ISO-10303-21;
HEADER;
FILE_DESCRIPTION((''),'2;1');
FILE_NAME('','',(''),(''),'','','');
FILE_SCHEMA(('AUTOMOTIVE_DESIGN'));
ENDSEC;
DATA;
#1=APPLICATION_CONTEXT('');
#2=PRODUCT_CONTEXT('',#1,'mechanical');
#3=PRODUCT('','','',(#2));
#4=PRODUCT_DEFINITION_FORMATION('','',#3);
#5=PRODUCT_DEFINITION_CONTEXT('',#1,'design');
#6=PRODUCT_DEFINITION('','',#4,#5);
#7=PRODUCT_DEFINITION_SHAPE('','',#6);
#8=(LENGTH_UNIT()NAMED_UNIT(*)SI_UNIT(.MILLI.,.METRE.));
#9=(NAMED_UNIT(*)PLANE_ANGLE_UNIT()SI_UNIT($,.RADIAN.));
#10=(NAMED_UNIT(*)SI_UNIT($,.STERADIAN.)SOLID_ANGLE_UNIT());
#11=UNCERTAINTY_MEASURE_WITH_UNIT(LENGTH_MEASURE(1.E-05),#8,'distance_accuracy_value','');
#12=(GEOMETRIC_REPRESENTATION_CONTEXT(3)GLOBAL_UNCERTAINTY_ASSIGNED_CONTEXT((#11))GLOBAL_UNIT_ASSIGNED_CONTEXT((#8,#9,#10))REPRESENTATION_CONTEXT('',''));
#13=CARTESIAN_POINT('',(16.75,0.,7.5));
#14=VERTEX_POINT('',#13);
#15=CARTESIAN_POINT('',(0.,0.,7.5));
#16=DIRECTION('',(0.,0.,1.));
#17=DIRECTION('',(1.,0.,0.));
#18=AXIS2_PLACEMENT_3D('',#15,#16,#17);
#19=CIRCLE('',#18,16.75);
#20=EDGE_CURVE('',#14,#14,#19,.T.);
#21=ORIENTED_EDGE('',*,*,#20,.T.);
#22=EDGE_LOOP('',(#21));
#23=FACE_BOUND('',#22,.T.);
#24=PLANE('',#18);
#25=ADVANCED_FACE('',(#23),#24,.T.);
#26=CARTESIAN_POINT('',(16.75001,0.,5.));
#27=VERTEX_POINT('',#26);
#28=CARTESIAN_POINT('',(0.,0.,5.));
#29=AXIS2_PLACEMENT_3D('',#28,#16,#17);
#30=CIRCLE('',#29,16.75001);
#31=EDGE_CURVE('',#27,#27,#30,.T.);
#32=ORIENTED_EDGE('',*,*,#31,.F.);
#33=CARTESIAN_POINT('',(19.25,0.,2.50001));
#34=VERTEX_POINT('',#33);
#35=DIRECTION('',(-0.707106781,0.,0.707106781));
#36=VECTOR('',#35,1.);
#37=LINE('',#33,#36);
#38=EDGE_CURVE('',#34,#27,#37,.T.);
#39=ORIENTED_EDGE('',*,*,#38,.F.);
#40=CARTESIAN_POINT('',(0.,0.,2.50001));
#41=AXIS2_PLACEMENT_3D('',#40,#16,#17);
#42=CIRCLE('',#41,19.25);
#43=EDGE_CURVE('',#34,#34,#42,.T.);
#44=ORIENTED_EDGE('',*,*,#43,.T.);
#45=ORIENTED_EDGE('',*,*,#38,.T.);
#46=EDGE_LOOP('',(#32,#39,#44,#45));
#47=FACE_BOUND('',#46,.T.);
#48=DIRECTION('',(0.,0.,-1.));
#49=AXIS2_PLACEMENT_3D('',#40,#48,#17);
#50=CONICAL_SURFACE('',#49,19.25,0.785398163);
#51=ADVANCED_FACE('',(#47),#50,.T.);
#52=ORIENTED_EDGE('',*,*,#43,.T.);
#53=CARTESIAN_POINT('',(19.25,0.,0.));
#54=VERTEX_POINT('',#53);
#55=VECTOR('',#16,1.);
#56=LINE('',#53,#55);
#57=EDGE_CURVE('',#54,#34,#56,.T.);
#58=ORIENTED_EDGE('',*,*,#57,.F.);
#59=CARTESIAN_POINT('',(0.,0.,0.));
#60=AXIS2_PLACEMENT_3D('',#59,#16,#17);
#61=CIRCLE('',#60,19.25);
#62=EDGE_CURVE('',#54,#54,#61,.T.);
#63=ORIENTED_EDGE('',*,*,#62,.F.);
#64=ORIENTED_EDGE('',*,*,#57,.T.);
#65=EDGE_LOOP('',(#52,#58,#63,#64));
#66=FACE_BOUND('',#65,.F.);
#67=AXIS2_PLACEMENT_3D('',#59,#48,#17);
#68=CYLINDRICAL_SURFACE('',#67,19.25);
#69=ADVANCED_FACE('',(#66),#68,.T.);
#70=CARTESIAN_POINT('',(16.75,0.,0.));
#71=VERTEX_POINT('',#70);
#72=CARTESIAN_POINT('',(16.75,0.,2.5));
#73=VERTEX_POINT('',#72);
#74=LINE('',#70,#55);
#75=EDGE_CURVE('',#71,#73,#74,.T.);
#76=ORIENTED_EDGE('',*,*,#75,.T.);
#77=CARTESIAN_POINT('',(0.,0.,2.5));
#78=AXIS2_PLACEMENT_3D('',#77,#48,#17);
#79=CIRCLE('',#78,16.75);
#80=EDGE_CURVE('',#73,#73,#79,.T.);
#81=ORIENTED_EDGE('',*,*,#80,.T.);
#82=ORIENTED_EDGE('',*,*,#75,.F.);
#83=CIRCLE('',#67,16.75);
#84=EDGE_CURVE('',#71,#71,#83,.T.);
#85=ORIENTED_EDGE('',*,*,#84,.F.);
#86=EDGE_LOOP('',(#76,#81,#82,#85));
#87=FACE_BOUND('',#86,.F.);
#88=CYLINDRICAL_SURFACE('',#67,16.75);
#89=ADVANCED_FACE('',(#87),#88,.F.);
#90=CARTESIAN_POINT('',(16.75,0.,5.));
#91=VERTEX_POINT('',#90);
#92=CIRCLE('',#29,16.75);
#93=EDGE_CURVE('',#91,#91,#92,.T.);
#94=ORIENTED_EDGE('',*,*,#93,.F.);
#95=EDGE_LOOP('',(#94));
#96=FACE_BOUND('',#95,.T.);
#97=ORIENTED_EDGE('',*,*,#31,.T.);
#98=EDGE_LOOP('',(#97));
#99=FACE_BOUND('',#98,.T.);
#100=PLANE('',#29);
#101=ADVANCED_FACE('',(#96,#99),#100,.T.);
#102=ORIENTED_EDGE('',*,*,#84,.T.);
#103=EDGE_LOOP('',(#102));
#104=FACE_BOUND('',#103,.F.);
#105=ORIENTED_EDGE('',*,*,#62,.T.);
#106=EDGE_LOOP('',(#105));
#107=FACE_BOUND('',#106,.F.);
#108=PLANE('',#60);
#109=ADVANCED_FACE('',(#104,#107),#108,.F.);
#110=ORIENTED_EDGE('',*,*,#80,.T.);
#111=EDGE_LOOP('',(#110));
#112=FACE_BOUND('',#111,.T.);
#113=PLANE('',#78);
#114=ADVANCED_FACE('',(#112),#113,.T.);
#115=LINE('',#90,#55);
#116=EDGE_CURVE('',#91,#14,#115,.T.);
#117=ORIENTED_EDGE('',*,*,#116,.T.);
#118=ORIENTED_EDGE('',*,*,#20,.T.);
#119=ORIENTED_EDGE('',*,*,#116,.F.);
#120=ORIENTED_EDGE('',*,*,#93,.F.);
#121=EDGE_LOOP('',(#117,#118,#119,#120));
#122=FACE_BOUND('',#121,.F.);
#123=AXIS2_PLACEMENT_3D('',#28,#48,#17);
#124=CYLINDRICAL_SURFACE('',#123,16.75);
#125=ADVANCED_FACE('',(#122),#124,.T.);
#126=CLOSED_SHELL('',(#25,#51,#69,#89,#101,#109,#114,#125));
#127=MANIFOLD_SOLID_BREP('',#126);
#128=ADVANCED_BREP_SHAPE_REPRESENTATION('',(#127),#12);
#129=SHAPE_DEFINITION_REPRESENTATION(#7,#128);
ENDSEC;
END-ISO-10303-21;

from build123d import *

# Parameters (mm, degrees)
F0_R     = 19.25
F1_DEPTH = 5
F2_R     = 16.75
F3_DEPTH = 2.5
F4_R     = 16.75
F5_DEPTH = 2.5
F6_SIZE  = 2.49999


# Not quite as in the source:
# - a fillet or chamfer is up to 0.001 mm smaller than in the source, because OpenCascade refuses the exact size


with BuildPart() as f1:
    # F0 (on Top) → F1 (new body)
    with BuildSketch(Plane.XY):
        Circle(F0_R)
    extrude(amount=F1_DEPTH)

    # F2 (on face) → F3 (join)
    with BuildSketch(Plane.XY.offset(5)):
        Circle(F2_R)
    extrude(amount=F3_DEPTH)

    # F4 (on face) → F5 (cut)
    with BuildSketch(Plane(origin=(0, 0, 0), x_dir=(1, 0, 0), z_dir=(0, 0, -1))):
        Circle(F4_R)
    extrude(amount=-F5_DEPTH, mode=Mode.SUBTRACT)

    # F6 (size 2.5 in the source; OpenCascade refuses exactly that, so slightly less here)
    f6_edges = [f1.edges().sort_by_distance(p)[0] for p in [
        (-19.25, 0, 5),
    ]]
    chamfer(f6_edges, length=F6_SIZE)


solid = f1.part
